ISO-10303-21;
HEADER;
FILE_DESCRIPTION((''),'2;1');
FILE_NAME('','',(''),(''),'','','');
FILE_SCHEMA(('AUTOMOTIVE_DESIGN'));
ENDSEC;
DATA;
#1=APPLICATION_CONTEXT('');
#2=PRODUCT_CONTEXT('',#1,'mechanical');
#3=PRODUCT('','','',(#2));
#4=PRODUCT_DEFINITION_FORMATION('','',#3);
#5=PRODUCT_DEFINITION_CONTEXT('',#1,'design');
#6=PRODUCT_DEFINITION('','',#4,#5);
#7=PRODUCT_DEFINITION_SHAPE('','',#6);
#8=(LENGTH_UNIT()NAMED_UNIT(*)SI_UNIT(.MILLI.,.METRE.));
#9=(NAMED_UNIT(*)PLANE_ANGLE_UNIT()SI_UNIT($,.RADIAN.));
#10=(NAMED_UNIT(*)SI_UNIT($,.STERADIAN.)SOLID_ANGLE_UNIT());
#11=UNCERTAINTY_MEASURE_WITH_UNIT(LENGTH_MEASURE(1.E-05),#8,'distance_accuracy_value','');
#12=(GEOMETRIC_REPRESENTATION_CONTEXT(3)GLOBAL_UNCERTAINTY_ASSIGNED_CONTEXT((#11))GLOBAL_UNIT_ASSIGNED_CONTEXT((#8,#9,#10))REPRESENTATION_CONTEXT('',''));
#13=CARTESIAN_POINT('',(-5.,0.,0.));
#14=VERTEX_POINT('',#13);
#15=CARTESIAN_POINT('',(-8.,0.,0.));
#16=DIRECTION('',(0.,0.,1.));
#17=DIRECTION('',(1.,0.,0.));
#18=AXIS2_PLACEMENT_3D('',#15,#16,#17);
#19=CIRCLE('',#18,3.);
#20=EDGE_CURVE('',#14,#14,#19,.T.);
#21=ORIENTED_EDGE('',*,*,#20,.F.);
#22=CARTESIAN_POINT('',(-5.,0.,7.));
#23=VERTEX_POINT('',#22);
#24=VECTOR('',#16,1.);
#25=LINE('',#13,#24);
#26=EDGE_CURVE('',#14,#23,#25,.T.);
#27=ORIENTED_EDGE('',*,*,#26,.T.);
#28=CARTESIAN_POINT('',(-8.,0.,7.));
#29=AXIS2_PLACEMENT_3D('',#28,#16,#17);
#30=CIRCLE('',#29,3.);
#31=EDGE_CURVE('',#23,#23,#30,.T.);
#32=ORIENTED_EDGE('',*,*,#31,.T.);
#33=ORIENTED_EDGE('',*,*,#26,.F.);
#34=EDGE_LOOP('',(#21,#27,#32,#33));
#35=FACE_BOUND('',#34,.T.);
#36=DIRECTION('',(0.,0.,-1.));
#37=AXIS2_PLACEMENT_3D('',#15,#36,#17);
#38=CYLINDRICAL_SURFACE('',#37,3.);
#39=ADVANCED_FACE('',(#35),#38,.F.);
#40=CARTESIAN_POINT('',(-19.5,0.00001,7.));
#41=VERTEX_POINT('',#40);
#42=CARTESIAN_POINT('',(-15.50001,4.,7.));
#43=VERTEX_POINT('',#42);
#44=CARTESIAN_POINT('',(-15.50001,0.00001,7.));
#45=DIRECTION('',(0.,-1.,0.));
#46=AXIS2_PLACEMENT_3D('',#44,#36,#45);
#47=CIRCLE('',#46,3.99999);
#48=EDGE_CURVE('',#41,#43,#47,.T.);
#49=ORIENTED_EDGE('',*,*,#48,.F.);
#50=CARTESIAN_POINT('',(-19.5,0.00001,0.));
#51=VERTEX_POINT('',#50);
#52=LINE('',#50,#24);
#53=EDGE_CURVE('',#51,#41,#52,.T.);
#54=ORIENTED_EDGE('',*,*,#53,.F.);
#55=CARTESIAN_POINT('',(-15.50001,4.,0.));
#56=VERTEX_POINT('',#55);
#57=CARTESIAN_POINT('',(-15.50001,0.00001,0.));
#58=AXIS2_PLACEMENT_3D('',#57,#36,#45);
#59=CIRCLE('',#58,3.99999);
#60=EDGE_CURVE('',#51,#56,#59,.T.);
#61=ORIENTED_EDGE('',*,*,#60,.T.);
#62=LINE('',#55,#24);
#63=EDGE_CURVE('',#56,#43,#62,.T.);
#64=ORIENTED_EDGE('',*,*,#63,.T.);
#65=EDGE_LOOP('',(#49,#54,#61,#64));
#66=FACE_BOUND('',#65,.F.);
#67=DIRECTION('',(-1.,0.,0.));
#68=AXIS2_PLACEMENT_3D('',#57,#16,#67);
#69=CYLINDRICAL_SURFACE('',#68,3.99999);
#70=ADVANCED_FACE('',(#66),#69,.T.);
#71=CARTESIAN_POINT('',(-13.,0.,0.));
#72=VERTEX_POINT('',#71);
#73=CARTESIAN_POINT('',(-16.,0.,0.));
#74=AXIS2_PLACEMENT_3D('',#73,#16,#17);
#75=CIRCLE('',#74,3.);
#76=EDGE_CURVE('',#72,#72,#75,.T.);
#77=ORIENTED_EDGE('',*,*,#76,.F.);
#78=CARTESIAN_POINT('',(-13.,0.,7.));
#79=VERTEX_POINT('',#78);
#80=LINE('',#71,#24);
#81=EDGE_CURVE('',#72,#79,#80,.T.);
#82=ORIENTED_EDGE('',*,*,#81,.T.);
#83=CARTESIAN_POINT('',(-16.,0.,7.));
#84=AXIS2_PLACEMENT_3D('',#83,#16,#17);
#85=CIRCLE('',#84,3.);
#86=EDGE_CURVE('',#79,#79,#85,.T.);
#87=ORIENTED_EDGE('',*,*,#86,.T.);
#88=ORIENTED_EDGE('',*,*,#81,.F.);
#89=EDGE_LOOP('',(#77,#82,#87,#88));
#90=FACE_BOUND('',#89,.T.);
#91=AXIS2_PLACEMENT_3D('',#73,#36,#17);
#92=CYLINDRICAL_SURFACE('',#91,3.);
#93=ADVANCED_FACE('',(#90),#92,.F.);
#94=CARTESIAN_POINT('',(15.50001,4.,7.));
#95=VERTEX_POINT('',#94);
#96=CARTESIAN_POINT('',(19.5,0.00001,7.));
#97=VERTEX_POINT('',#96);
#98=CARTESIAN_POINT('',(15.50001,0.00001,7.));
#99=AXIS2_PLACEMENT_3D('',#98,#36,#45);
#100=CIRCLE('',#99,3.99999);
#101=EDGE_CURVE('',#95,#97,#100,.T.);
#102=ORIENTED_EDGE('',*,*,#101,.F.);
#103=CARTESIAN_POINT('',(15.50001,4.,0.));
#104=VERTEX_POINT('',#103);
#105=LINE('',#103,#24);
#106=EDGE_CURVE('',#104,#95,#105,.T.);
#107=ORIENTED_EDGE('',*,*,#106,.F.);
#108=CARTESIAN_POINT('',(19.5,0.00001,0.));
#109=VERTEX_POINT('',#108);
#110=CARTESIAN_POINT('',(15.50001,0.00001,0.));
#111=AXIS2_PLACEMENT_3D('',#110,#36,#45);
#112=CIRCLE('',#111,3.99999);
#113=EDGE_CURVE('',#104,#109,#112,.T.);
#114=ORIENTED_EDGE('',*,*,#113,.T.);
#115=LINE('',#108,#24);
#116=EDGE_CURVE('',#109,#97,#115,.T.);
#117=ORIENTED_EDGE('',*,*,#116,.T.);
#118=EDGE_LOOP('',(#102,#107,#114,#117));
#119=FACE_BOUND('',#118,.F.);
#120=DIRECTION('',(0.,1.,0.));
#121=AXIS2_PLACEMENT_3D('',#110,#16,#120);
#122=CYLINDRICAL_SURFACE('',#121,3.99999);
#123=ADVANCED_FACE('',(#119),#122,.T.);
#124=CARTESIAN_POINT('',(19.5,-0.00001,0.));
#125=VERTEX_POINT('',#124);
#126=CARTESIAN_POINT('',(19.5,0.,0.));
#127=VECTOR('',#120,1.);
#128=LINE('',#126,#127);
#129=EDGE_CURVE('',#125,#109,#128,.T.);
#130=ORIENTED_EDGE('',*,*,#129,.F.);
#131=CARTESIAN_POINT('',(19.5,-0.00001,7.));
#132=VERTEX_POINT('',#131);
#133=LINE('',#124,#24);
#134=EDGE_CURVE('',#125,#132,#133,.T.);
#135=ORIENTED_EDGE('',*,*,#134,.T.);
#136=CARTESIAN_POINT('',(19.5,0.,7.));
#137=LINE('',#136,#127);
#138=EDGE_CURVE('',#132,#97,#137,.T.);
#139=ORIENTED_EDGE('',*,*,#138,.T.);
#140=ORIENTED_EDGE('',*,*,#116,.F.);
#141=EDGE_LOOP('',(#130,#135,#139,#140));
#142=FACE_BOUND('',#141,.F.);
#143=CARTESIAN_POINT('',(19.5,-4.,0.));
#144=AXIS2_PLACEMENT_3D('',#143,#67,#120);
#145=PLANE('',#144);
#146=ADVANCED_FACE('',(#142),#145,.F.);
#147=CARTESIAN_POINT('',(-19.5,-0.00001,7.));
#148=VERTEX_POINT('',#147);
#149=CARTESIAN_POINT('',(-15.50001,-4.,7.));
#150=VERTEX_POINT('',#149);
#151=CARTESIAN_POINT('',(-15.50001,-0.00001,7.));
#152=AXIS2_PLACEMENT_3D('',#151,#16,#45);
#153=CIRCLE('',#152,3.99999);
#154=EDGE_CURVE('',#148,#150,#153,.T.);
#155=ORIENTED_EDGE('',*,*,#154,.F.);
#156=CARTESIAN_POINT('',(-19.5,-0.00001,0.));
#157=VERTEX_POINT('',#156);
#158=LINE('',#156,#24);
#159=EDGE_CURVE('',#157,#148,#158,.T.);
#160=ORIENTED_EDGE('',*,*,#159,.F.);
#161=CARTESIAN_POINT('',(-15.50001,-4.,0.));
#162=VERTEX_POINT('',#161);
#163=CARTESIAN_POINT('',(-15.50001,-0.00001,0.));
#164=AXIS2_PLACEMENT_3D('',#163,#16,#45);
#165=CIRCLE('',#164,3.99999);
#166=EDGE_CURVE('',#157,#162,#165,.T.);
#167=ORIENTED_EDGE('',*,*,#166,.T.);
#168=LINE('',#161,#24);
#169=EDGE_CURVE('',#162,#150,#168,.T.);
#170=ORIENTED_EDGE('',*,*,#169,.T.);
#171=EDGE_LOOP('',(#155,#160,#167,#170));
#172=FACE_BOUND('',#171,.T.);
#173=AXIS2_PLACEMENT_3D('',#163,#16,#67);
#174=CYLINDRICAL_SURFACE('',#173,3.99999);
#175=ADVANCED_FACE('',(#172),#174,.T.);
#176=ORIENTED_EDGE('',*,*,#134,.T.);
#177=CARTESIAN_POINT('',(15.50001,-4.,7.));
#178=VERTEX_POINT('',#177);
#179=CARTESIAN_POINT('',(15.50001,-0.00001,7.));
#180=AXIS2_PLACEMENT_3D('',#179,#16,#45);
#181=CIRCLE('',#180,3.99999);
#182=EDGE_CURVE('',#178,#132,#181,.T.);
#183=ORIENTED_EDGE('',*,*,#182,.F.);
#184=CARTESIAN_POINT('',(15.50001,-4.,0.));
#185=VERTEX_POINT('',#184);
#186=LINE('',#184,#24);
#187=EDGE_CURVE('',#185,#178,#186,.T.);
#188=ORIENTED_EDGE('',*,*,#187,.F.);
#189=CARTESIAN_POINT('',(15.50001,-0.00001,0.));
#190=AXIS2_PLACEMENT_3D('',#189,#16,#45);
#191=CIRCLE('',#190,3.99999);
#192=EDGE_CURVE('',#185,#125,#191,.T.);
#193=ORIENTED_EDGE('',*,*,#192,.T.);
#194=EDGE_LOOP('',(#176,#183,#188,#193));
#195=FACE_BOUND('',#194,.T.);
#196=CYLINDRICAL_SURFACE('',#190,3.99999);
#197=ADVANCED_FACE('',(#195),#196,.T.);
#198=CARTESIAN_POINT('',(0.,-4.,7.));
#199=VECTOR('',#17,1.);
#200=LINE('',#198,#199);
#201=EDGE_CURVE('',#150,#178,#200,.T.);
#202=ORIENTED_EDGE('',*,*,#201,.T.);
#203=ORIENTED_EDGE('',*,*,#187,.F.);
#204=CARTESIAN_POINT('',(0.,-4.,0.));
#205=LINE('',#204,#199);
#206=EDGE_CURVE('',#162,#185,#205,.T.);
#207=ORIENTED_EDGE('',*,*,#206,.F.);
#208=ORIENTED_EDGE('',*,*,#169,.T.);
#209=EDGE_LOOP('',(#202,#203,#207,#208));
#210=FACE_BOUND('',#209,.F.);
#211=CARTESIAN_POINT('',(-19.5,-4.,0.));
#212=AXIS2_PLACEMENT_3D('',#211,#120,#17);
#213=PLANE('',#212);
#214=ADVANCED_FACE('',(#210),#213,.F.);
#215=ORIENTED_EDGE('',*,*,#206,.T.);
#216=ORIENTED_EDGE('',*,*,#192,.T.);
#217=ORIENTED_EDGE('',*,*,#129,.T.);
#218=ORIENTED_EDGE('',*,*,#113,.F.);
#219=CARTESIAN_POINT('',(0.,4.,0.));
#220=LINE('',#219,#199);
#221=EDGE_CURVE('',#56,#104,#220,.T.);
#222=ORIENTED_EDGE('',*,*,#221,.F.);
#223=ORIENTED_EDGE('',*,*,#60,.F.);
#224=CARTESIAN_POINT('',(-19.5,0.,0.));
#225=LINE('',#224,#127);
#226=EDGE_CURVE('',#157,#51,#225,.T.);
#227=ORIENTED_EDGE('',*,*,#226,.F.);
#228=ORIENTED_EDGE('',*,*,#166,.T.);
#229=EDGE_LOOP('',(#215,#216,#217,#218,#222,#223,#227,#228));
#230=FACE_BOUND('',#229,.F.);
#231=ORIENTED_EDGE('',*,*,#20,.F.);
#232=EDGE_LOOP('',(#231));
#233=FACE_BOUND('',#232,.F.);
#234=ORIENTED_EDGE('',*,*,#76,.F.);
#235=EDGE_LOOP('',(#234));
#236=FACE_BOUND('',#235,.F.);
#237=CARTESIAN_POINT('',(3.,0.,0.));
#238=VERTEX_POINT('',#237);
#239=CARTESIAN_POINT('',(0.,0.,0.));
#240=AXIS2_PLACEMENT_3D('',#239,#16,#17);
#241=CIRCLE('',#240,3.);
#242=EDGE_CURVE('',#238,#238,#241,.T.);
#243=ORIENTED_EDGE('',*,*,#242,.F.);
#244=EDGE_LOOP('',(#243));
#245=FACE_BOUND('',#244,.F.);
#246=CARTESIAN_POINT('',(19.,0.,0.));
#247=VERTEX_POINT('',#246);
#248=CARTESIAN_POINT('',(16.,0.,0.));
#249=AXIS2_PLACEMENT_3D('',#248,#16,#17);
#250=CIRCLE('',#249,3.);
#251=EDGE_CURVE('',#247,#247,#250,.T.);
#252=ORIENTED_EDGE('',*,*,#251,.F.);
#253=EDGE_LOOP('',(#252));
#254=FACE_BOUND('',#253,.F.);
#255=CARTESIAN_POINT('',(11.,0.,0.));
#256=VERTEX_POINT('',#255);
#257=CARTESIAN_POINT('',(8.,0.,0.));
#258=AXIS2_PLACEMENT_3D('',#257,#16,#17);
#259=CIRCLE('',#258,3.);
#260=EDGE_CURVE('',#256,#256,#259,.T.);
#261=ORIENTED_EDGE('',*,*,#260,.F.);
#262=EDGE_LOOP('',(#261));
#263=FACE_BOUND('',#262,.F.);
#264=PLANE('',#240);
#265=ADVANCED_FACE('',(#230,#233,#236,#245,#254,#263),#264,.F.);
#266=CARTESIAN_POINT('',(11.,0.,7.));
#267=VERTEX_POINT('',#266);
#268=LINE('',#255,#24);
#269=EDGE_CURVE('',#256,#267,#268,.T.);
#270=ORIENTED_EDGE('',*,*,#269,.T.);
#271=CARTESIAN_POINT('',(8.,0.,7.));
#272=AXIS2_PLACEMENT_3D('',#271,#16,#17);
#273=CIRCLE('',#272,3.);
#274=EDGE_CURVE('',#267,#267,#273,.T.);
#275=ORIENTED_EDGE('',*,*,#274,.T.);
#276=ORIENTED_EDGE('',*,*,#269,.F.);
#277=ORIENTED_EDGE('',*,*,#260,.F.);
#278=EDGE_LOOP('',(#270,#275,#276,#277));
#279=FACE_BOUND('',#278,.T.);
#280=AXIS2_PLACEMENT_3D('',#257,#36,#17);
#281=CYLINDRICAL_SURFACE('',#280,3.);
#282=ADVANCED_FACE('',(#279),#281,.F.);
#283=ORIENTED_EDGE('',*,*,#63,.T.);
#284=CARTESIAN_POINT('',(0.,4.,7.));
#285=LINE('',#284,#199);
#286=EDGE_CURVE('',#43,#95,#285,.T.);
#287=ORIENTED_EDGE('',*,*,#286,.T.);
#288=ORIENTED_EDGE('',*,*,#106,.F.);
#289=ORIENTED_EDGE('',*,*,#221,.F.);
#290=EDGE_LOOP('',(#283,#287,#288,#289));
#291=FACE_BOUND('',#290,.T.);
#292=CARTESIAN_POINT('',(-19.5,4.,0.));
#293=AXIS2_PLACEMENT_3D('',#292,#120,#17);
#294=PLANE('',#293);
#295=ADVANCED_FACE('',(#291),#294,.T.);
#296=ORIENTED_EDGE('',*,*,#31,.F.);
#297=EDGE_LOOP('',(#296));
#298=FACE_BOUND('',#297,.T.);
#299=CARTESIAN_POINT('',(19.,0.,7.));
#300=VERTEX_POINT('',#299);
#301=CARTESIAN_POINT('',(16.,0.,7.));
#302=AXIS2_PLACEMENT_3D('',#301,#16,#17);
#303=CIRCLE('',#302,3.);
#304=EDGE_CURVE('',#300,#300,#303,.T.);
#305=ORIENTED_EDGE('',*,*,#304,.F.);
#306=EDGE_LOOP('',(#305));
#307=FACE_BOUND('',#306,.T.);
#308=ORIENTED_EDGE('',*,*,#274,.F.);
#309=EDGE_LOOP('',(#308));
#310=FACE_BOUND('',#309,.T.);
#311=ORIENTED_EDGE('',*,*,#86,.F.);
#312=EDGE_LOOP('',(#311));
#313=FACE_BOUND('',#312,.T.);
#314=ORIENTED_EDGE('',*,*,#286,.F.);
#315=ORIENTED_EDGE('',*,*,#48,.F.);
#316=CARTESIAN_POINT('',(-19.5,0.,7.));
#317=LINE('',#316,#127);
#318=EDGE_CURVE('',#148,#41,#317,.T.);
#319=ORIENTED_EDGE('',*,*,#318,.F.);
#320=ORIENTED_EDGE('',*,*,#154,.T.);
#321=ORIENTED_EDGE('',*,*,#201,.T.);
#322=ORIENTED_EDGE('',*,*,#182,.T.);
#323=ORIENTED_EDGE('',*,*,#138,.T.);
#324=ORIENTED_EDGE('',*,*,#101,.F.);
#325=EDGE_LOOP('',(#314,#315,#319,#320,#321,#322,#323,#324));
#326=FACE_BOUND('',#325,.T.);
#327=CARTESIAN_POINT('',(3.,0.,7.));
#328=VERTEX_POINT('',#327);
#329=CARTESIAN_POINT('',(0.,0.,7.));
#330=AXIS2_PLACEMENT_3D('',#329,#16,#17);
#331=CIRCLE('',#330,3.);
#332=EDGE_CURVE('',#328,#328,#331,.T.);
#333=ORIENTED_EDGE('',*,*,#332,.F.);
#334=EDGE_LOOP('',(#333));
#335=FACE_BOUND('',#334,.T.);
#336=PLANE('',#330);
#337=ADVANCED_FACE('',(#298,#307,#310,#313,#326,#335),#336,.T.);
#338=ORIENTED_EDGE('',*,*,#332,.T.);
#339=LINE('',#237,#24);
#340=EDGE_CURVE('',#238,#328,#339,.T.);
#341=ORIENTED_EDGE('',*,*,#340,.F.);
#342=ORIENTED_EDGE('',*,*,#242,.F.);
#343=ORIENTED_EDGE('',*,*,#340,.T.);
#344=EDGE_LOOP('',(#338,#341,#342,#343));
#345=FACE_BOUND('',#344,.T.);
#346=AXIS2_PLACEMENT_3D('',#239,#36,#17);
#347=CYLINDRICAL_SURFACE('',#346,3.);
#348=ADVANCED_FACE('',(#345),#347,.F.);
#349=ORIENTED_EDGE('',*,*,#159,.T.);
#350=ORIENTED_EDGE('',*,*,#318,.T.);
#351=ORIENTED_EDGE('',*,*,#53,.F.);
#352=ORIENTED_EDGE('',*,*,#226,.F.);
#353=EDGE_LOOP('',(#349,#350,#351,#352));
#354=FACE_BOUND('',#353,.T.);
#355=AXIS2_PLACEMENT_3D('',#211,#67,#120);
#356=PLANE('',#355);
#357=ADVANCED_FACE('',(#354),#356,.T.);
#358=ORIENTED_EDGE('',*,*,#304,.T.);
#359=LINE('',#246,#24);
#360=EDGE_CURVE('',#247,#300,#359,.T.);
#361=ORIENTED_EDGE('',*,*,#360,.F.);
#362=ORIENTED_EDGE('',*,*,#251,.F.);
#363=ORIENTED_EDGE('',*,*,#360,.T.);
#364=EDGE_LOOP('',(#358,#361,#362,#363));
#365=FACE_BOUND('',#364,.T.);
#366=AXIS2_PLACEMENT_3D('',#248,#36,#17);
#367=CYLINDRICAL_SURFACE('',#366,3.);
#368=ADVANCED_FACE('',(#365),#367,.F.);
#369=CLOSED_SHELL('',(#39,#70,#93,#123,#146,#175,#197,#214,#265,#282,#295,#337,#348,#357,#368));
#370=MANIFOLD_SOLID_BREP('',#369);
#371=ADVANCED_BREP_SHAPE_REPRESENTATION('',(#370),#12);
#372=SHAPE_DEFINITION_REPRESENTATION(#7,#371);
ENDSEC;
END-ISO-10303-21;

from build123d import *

# Parameters (mm, degrees)
F0_W     = 39
F0_H     = 8
F0_R     = 3
F1_DEPTH = 7
F2_R     = 3.99999


# Not quite as in the source:
# - a fillet or chamfer is up to 0.001 mm smaller than in the source, because OpenCascade refuses the exact size


with BuildPart() as f1:
    # F0 (on Top) → F1 (new body)
    with BuildSketch(Plane.XY):
        Rectangle(F0_W, F0_H)
        with Locations((-16, 0)):
            Circle(F0_R, mode=Mode.SUBTRACT)
        with Locations((-8, 0)):
            Circle(F0_R, mode=Mode.SUBTRACT)
        Circle(F0_R, mode=Mode.SUBTRACT)
        with Locations((8, 0)):
            Circle(F0_R, mode=Mode.SUBTRACT)
        with Locations((16, 0)):
            Circle(F0_R, mode=Mode.SUBTRACT)
    extrude(amount=F1_DEPTH)

    # F2 (radius 4 in the source; OpenCascade refuses exactly that, so slightly less here)
    f2_edges = [f1.edges().sort_by_distance(p)[0] for p in [
        (-19.5, 4, 3.5),
        (-19.5, -4, 3.5),
        (19.5, -4, 3.5),
        (19.5, 4, 3.5),
    ]]
    fillet(f2_edges, radius=F2_R)


solid = f1.part
